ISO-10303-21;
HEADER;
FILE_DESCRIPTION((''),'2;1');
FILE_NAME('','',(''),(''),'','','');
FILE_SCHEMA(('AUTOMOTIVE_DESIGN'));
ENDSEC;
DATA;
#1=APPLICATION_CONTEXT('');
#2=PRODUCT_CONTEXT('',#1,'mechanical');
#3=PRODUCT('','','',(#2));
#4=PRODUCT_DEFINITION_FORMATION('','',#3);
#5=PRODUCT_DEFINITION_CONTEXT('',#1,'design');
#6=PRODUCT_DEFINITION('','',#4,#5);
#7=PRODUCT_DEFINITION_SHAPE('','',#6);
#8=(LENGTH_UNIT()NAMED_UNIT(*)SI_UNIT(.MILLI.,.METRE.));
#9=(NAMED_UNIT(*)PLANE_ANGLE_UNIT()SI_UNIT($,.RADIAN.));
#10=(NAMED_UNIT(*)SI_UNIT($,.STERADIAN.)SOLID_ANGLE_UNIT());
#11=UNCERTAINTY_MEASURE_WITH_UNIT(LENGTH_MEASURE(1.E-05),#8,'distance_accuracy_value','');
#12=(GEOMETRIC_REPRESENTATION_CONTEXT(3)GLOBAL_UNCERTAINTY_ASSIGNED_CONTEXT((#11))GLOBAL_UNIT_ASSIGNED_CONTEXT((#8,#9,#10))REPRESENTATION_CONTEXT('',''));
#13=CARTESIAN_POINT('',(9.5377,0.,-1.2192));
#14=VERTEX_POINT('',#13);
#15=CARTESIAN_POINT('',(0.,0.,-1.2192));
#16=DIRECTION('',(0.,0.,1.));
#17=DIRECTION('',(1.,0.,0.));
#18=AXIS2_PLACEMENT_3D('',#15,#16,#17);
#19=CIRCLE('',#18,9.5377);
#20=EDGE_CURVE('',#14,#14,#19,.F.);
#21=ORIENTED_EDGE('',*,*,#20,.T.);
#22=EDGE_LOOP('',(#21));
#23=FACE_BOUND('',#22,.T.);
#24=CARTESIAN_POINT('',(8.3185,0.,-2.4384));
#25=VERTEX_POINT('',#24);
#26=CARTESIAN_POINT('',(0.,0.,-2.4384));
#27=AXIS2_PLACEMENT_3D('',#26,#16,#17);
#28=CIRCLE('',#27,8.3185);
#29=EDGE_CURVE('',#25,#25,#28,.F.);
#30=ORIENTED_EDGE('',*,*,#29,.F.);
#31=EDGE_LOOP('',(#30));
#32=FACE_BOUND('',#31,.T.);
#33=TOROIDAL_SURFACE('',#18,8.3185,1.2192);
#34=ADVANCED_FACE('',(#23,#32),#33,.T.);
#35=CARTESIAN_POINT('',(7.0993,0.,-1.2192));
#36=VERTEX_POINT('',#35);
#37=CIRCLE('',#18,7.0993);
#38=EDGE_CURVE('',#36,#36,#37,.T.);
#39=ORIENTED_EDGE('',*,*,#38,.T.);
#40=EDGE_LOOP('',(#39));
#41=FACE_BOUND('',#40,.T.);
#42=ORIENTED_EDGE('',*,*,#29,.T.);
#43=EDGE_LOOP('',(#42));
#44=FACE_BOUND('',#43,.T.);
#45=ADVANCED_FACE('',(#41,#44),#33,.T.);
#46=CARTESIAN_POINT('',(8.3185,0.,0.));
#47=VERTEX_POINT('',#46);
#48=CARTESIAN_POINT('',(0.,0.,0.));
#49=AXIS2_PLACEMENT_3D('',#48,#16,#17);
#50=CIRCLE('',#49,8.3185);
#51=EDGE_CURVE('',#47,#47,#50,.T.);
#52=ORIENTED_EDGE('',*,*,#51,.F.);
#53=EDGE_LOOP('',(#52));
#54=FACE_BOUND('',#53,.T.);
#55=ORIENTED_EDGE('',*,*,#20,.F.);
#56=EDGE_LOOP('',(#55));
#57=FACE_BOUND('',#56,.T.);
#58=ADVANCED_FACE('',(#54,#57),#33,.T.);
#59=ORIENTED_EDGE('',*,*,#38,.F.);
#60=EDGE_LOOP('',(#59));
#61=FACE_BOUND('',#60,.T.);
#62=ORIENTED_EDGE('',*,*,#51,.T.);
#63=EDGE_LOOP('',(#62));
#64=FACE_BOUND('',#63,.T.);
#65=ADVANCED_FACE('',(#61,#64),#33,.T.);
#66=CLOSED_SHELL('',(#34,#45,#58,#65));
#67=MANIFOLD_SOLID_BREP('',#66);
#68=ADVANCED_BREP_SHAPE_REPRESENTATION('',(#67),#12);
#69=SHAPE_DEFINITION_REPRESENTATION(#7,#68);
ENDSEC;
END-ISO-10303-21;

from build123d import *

# Parameters (mm, degrees)
SKETCH2_R           = 9.5377
SKETCH2_R_2         = 7.0993
BOSS_EXTRUDE1_DEPTH = 2.4384
FILLET3_R           = 1.2192


with BuildPart() as part:
    # Sketch2 → Boss-Extrude1 (new body)
    with BuildSketch(Plane.XY):
        Circle(SKETCH2_R)
        Circle(SKETCH2_R_2, mode=Mode.SUBTRACT)
    extrude(amount=-BOSS_EXTRUDE1_DEPTH)

    # Fillet3
    fillet3_edges = [part.edges().sort_by_distance(p)[0] for p in [
        (-9.5377, 0, 0),
        (-9.5377, 0, -2.4384),
        (-7.0993, 0, -2.4384),
        (-7.0993, 0, 0),
    ]]
    fillet(fillet3_edges, radius=FILLET3_R - 0.0001)  # a hair under: the kernel refuses the full size


solid = part.part
